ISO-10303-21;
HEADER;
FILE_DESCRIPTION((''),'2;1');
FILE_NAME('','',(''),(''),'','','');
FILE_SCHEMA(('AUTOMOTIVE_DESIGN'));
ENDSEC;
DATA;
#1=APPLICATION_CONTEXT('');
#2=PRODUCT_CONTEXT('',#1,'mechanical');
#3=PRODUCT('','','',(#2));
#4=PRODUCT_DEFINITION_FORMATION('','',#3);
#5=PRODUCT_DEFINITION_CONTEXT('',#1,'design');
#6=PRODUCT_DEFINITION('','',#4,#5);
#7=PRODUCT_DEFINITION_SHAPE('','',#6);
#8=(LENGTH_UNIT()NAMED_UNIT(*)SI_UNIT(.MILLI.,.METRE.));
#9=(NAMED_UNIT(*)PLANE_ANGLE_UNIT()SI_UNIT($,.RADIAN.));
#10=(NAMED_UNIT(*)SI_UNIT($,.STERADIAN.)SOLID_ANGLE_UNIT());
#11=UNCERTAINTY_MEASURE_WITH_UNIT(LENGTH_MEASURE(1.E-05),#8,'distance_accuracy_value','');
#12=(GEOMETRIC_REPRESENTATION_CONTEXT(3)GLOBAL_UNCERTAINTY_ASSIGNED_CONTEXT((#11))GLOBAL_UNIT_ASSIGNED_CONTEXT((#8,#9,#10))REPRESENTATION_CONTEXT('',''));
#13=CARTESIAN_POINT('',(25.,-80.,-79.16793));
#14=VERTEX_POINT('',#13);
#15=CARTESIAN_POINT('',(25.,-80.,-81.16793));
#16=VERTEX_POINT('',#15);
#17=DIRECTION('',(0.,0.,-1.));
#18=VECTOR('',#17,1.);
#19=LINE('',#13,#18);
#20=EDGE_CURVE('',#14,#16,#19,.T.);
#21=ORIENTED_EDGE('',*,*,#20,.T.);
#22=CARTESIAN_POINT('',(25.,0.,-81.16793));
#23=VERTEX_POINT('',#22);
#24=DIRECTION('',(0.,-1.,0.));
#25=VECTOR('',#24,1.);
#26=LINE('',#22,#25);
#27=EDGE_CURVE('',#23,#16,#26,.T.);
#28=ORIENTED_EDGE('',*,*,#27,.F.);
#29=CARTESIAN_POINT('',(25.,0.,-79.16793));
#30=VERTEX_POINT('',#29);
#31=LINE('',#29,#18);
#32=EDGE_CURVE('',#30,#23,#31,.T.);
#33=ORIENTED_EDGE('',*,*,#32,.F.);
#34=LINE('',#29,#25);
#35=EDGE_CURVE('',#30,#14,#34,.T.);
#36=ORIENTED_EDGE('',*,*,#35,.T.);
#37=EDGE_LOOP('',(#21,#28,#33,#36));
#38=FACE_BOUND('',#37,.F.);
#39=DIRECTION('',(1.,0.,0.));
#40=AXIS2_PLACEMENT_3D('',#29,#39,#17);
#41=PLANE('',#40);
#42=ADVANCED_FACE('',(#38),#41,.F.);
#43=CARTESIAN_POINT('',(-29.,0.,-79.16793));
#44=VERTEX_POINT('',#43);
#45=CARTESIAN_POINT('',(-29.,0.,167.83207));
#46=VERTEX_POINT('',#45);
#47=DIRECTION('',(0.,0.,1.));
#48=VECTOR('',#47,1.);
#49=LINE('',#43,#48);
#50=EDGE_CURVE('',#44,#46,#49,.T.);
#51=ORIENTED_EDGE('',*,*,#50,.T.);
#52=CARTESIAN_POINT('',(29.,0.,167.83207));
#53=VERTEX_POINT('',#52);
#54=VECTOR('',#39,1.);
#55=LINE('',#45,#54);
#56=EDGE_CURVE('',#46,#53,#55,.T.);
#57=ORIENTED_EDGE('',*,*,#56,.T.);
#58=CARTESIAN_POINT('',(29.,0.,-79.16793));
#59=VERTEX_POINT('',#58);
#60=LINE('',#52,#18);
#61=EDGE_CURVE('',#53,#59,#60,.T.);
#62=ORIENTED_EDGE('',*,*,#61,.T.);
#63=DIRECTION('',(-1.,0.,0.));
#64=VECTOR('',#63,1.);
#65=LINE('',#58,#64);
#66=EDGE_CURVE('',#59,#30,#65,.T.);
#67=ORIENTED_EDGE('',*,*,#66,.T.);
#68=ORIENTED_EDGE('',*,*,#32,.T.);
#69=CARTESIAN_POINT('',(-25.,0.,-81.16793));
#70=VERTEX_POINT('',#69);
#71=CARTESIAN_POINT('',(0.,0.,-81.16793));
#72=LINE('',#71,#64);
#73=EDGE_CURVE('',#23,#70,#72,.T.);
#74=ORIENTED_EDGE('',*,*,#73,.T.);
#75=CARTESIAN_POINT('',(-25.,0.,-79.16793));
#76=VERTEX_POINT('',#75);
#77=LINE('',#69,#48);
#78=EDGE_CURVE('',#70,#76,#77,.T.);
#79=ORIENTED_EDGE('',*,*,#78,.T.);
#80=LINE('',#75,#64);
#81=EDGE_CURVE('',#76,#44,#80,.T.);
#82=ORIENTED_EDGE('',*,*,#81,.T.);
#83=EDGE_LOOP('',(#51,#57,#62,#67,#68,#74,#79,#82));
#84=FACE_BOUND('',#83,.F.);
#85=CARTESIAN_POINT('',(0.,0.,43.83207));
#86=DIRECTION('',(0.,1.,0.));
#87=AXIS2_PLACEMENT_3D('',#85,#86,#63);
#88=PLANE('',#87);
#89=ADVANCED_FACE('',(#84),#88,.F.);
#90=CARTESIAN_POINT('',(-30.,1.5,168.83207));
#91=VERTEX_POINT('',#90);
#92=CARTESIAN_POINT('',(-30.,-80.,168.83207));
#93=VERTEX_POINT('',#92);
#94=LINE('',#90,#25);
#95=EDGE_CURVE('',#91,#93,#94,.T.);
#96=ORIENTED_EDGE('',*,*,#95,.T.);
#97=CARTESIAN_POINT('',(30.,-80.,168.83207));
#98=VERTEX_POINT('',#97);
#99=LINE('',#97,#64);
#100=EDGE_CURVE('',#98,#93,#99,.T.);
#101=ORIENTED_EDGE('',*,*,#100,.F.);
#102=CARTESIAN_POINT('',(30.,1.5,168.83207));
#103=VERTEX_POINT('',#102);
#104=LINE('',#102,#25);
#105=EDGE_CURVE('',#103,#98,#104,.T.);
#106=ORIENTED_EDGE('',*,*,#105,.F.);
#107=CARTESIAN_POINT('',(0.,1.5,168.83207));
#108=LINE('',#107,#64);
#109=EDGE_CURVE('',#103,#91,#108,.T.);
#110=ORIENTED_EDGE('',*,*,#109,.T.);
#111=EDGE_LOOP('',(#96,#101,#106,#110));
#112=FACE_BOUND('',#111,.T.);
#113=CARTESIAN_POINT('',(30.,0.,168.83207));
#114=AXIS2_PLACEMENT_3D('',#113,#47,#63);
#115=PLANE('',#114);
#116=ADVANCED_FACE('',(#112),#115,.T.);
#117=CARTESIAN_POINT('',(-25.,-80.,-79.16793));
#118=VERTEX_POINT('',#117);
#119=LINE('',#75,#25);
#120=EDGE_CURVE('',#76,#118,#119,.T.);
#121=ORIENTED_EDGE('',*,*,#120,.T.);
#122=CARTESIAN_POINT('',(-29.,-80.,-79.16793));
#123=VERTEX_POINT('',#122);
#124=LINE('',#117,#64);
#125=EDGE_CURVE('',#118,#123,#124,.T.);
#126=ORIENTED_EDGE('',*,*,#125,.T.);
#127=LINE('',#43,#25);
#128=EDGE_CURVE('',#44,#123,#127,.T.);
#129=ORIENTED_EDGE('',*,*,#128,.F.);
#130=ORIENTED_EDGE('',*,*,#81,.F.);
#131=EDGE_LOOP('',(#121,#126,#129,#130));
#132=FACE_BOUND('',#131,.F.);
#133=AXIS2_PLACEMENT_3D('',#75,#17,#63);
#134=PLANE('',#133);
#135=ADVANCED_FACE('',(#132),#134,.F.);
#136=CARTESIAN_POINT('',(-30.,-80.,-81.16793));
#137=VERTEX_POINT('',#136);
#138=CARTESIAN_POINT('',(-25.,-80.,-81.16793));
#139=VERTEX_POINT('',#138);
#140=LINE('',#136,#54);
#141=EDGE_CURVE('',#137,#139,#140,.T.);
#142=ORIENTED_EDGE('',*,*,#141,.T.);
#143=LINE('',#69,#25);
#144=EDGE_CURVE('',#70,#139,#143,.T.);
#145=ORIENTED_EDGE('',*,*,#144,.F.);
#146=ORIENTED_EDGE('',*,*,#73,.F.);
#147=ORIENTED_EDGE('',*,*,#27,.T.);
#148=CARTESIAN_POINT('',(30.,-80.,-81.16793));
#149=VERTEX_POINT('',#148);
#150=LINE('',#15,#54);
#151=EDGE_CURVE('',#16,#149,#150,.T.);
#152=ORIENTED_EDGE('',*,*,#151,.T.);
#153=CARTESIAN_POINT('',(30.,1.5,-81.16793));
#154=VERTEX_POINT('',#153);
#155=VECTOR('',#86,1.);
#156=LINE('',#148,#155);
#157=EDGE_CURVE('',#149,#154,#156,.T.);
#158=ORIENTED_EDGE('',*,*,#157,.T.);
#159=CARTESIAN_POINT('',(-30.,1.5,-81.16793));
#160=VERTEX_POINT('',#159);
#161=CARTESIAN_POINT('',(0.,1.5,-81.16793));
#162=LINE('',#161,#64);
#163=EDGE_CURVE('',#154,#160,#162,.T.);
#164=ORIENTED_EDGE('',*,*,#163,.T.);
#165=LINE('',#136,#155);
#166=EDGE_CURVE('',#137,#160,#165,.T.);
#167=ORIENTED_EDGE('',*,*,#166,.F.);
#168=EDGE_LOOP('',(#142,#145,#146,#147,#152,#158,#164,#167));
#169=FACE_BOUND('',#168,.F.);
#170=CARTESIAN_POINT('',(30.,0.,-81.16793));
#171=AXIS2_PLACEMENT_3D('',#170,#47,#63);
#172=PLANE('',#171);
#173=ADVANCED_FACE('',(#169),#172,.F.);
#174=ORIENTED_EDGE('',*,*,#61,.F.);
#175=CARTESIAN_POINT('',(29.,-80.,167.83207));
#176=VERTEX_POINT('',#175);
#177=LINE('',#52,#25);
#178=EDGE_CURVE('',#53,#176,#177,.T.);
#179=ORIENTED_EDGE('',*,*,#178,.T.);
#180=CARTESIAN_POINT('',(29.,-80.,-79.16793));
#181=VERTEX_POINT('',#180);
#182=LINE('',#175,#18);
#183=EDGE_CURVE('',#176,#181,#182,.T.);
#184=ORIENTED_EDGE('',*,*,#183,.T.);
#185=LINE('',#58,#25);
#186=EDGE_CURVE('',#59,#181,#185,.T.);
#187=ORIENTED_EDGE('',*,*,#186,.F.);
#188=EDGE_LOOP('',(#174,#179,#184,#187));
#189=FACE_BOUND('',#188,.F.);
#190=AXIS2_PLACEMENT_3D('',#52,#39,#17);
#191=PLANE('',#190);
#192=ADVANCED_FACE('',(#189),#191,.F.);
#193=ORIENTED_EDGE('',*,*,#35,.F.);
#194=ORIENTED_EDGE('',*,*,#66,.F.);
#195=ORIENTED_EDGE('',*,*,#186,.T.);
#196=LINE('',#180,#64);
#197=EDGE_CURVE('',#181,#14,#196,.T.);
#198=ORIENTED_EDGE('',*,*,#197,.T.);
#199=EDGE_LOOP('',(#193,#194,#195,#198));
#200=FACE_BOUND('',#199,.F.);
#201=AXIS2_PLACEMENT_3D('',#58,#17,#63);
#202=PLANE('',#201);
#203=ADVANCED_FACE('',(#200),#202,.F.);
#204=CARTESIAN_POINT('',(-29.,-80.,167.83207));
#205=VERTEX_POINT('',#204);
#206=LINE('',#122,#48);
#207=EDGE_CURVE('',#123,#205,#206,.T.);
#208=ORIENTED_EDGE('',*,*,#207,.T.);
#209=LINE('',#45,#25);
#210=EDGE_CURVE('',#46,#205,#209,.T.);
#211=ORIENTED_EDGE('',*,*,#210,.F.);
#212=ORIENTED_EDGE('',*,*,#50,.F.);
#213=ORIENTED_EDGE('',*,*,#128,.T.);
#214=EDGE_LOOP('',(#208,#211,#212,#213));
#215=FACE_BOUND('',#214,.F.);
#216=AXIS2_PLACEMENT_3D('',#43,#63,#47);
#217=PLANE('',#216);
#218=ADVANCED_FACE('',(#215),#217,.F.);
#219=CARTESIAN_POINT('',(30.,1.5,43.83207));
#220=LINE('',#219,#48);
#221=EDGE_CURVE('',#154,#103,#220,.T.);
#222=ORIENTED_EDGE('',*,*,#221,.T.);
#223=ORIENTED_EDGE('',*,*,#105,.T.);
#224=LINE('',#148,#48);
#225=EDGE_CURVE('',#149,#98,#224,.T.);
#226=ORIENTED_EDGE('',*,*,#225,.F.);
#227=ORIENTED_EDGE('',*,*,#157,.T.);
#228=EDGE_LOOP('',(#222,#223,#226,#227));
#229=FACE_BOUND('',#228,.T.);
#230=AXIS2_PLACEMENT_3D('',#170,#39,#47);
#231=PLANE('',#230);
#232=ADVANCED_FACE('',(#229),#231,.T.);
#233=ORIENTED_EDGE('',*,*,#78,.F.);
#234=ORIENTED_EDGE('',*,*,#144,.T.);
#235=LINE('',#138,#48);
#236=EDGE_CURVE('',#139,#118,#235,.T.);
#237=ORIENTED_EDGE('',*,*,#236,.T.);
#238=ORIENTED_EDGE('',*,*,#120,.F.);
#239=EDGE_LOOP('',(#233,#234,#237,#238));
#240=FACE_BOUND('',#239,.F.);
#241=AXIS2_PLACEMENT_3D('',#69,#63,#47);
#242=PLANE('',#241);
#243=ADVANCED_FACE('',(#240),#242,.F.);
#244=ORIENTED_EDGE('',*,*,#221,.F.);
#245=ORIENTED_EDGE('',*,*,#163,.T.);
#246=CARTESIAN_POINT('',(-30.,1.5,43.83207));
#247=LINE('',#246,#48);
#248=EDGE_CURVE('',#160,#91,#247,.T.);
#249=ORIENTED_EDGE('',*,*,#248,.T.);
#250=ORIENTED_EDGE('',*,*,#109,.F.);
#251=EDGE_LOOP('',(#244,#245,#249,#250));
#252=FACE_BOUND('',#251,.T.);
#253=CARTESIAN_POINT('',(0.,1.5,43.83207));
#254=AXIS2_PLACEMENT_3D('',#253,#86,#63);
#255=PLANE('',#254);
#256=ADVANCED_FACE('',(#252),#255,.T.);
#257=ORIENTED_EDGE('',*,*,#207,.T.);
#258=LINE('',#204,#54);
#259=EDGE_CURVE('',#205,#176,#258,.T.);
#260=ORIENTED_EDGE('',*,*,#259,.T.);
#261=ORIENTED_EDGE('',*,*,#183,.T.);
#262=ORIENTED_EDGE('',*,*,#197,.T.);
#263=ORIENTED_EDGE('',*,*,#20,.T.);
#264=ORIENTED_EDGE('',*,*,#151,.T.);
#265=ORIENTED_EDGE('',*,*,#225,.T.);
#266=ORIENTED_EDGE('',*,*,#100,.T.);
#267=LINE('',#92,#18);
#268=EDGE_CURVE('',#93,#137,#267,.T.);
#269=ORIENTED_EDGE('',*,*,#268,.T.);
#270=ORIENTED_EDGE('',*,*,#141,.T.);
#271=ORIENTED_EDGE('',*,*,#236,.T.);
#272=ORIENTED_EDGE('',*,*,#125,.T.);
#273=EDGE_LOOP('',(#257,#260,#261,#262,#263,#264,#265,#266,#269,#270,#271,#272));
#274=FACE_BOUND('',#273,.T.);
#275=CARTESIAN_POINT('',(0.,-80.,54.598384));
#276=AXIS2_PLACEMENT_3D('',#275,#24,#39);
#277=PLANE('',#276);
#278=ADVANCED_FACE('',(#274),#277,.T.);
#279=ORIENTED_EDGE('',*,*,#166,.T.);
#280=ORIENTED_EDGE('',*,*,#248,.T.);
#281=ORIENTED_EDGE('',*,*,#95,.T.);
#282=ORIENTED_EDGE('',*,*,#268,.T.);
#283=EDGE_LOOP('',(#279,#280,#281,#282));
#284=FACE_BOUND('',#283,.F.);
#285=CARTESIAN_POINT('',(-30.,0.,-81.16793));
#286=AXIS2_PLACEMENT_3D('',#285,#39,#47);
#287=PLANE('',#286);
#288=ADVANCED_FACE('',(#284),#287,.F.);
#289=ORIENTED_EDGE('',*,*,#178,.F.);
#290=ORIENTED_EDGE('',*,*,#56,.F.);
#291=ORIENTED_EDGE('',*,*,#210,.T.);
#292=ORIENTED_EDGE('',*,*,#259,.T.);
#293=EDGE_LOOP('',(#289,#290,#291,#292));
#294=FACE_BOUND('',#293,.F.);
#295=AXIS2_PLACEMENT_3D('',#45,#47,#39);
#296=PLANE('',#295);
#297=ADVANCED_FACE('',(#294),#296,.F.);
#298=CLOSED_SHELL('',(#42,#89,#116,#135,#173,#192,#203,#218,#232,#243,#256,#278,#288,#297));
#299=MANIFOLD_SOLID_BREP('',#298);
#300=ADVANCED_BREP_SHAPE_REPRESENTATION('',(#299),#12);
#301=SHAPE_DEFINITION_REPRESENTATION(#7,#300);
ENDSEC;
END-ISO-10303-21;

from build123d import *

# Parameters (mm, degrees)
F1_DEPTH = 80
F2_W     = 60
F2_H     = 250
F3_DEPTH = 1.5


# Not quite as in the source:
# - a feature of the source that left no trace in its solid (it failed there, or was rolled back) is left out


with BuildPart() as f1:
    # F0 (on Front) → F1 (new body)
    with BuildSketch(Plane.XZ):
        Polygon((30, 168.8320699929), (-30, 168.8320699929), (-30, -81.1679300071), (-25, -81.1679300071), (-25, -79.1679300071), (-29, -79.1679300071), (-29, 167.8320699929), (29, 167.8320699929), (29, -79.1679300071), (25, -79.1679300071), (25, -81.1679300071), (30, -81.1679300071), align=None)
    extrude(amount=F1_DEPTH)

    # F2 (on face) → F3 (join)
    with BuildSketch(Plane(origin=(0, 0, 0), x_dir=(-1, 0, 0), z_dir=(0, 1, 0))):
        with Locations((0, 43.8320699929)):
            Rectangle(F2_W, F2_H)
    extrude(amount=F3_DEPTH)


solid = f1.part
